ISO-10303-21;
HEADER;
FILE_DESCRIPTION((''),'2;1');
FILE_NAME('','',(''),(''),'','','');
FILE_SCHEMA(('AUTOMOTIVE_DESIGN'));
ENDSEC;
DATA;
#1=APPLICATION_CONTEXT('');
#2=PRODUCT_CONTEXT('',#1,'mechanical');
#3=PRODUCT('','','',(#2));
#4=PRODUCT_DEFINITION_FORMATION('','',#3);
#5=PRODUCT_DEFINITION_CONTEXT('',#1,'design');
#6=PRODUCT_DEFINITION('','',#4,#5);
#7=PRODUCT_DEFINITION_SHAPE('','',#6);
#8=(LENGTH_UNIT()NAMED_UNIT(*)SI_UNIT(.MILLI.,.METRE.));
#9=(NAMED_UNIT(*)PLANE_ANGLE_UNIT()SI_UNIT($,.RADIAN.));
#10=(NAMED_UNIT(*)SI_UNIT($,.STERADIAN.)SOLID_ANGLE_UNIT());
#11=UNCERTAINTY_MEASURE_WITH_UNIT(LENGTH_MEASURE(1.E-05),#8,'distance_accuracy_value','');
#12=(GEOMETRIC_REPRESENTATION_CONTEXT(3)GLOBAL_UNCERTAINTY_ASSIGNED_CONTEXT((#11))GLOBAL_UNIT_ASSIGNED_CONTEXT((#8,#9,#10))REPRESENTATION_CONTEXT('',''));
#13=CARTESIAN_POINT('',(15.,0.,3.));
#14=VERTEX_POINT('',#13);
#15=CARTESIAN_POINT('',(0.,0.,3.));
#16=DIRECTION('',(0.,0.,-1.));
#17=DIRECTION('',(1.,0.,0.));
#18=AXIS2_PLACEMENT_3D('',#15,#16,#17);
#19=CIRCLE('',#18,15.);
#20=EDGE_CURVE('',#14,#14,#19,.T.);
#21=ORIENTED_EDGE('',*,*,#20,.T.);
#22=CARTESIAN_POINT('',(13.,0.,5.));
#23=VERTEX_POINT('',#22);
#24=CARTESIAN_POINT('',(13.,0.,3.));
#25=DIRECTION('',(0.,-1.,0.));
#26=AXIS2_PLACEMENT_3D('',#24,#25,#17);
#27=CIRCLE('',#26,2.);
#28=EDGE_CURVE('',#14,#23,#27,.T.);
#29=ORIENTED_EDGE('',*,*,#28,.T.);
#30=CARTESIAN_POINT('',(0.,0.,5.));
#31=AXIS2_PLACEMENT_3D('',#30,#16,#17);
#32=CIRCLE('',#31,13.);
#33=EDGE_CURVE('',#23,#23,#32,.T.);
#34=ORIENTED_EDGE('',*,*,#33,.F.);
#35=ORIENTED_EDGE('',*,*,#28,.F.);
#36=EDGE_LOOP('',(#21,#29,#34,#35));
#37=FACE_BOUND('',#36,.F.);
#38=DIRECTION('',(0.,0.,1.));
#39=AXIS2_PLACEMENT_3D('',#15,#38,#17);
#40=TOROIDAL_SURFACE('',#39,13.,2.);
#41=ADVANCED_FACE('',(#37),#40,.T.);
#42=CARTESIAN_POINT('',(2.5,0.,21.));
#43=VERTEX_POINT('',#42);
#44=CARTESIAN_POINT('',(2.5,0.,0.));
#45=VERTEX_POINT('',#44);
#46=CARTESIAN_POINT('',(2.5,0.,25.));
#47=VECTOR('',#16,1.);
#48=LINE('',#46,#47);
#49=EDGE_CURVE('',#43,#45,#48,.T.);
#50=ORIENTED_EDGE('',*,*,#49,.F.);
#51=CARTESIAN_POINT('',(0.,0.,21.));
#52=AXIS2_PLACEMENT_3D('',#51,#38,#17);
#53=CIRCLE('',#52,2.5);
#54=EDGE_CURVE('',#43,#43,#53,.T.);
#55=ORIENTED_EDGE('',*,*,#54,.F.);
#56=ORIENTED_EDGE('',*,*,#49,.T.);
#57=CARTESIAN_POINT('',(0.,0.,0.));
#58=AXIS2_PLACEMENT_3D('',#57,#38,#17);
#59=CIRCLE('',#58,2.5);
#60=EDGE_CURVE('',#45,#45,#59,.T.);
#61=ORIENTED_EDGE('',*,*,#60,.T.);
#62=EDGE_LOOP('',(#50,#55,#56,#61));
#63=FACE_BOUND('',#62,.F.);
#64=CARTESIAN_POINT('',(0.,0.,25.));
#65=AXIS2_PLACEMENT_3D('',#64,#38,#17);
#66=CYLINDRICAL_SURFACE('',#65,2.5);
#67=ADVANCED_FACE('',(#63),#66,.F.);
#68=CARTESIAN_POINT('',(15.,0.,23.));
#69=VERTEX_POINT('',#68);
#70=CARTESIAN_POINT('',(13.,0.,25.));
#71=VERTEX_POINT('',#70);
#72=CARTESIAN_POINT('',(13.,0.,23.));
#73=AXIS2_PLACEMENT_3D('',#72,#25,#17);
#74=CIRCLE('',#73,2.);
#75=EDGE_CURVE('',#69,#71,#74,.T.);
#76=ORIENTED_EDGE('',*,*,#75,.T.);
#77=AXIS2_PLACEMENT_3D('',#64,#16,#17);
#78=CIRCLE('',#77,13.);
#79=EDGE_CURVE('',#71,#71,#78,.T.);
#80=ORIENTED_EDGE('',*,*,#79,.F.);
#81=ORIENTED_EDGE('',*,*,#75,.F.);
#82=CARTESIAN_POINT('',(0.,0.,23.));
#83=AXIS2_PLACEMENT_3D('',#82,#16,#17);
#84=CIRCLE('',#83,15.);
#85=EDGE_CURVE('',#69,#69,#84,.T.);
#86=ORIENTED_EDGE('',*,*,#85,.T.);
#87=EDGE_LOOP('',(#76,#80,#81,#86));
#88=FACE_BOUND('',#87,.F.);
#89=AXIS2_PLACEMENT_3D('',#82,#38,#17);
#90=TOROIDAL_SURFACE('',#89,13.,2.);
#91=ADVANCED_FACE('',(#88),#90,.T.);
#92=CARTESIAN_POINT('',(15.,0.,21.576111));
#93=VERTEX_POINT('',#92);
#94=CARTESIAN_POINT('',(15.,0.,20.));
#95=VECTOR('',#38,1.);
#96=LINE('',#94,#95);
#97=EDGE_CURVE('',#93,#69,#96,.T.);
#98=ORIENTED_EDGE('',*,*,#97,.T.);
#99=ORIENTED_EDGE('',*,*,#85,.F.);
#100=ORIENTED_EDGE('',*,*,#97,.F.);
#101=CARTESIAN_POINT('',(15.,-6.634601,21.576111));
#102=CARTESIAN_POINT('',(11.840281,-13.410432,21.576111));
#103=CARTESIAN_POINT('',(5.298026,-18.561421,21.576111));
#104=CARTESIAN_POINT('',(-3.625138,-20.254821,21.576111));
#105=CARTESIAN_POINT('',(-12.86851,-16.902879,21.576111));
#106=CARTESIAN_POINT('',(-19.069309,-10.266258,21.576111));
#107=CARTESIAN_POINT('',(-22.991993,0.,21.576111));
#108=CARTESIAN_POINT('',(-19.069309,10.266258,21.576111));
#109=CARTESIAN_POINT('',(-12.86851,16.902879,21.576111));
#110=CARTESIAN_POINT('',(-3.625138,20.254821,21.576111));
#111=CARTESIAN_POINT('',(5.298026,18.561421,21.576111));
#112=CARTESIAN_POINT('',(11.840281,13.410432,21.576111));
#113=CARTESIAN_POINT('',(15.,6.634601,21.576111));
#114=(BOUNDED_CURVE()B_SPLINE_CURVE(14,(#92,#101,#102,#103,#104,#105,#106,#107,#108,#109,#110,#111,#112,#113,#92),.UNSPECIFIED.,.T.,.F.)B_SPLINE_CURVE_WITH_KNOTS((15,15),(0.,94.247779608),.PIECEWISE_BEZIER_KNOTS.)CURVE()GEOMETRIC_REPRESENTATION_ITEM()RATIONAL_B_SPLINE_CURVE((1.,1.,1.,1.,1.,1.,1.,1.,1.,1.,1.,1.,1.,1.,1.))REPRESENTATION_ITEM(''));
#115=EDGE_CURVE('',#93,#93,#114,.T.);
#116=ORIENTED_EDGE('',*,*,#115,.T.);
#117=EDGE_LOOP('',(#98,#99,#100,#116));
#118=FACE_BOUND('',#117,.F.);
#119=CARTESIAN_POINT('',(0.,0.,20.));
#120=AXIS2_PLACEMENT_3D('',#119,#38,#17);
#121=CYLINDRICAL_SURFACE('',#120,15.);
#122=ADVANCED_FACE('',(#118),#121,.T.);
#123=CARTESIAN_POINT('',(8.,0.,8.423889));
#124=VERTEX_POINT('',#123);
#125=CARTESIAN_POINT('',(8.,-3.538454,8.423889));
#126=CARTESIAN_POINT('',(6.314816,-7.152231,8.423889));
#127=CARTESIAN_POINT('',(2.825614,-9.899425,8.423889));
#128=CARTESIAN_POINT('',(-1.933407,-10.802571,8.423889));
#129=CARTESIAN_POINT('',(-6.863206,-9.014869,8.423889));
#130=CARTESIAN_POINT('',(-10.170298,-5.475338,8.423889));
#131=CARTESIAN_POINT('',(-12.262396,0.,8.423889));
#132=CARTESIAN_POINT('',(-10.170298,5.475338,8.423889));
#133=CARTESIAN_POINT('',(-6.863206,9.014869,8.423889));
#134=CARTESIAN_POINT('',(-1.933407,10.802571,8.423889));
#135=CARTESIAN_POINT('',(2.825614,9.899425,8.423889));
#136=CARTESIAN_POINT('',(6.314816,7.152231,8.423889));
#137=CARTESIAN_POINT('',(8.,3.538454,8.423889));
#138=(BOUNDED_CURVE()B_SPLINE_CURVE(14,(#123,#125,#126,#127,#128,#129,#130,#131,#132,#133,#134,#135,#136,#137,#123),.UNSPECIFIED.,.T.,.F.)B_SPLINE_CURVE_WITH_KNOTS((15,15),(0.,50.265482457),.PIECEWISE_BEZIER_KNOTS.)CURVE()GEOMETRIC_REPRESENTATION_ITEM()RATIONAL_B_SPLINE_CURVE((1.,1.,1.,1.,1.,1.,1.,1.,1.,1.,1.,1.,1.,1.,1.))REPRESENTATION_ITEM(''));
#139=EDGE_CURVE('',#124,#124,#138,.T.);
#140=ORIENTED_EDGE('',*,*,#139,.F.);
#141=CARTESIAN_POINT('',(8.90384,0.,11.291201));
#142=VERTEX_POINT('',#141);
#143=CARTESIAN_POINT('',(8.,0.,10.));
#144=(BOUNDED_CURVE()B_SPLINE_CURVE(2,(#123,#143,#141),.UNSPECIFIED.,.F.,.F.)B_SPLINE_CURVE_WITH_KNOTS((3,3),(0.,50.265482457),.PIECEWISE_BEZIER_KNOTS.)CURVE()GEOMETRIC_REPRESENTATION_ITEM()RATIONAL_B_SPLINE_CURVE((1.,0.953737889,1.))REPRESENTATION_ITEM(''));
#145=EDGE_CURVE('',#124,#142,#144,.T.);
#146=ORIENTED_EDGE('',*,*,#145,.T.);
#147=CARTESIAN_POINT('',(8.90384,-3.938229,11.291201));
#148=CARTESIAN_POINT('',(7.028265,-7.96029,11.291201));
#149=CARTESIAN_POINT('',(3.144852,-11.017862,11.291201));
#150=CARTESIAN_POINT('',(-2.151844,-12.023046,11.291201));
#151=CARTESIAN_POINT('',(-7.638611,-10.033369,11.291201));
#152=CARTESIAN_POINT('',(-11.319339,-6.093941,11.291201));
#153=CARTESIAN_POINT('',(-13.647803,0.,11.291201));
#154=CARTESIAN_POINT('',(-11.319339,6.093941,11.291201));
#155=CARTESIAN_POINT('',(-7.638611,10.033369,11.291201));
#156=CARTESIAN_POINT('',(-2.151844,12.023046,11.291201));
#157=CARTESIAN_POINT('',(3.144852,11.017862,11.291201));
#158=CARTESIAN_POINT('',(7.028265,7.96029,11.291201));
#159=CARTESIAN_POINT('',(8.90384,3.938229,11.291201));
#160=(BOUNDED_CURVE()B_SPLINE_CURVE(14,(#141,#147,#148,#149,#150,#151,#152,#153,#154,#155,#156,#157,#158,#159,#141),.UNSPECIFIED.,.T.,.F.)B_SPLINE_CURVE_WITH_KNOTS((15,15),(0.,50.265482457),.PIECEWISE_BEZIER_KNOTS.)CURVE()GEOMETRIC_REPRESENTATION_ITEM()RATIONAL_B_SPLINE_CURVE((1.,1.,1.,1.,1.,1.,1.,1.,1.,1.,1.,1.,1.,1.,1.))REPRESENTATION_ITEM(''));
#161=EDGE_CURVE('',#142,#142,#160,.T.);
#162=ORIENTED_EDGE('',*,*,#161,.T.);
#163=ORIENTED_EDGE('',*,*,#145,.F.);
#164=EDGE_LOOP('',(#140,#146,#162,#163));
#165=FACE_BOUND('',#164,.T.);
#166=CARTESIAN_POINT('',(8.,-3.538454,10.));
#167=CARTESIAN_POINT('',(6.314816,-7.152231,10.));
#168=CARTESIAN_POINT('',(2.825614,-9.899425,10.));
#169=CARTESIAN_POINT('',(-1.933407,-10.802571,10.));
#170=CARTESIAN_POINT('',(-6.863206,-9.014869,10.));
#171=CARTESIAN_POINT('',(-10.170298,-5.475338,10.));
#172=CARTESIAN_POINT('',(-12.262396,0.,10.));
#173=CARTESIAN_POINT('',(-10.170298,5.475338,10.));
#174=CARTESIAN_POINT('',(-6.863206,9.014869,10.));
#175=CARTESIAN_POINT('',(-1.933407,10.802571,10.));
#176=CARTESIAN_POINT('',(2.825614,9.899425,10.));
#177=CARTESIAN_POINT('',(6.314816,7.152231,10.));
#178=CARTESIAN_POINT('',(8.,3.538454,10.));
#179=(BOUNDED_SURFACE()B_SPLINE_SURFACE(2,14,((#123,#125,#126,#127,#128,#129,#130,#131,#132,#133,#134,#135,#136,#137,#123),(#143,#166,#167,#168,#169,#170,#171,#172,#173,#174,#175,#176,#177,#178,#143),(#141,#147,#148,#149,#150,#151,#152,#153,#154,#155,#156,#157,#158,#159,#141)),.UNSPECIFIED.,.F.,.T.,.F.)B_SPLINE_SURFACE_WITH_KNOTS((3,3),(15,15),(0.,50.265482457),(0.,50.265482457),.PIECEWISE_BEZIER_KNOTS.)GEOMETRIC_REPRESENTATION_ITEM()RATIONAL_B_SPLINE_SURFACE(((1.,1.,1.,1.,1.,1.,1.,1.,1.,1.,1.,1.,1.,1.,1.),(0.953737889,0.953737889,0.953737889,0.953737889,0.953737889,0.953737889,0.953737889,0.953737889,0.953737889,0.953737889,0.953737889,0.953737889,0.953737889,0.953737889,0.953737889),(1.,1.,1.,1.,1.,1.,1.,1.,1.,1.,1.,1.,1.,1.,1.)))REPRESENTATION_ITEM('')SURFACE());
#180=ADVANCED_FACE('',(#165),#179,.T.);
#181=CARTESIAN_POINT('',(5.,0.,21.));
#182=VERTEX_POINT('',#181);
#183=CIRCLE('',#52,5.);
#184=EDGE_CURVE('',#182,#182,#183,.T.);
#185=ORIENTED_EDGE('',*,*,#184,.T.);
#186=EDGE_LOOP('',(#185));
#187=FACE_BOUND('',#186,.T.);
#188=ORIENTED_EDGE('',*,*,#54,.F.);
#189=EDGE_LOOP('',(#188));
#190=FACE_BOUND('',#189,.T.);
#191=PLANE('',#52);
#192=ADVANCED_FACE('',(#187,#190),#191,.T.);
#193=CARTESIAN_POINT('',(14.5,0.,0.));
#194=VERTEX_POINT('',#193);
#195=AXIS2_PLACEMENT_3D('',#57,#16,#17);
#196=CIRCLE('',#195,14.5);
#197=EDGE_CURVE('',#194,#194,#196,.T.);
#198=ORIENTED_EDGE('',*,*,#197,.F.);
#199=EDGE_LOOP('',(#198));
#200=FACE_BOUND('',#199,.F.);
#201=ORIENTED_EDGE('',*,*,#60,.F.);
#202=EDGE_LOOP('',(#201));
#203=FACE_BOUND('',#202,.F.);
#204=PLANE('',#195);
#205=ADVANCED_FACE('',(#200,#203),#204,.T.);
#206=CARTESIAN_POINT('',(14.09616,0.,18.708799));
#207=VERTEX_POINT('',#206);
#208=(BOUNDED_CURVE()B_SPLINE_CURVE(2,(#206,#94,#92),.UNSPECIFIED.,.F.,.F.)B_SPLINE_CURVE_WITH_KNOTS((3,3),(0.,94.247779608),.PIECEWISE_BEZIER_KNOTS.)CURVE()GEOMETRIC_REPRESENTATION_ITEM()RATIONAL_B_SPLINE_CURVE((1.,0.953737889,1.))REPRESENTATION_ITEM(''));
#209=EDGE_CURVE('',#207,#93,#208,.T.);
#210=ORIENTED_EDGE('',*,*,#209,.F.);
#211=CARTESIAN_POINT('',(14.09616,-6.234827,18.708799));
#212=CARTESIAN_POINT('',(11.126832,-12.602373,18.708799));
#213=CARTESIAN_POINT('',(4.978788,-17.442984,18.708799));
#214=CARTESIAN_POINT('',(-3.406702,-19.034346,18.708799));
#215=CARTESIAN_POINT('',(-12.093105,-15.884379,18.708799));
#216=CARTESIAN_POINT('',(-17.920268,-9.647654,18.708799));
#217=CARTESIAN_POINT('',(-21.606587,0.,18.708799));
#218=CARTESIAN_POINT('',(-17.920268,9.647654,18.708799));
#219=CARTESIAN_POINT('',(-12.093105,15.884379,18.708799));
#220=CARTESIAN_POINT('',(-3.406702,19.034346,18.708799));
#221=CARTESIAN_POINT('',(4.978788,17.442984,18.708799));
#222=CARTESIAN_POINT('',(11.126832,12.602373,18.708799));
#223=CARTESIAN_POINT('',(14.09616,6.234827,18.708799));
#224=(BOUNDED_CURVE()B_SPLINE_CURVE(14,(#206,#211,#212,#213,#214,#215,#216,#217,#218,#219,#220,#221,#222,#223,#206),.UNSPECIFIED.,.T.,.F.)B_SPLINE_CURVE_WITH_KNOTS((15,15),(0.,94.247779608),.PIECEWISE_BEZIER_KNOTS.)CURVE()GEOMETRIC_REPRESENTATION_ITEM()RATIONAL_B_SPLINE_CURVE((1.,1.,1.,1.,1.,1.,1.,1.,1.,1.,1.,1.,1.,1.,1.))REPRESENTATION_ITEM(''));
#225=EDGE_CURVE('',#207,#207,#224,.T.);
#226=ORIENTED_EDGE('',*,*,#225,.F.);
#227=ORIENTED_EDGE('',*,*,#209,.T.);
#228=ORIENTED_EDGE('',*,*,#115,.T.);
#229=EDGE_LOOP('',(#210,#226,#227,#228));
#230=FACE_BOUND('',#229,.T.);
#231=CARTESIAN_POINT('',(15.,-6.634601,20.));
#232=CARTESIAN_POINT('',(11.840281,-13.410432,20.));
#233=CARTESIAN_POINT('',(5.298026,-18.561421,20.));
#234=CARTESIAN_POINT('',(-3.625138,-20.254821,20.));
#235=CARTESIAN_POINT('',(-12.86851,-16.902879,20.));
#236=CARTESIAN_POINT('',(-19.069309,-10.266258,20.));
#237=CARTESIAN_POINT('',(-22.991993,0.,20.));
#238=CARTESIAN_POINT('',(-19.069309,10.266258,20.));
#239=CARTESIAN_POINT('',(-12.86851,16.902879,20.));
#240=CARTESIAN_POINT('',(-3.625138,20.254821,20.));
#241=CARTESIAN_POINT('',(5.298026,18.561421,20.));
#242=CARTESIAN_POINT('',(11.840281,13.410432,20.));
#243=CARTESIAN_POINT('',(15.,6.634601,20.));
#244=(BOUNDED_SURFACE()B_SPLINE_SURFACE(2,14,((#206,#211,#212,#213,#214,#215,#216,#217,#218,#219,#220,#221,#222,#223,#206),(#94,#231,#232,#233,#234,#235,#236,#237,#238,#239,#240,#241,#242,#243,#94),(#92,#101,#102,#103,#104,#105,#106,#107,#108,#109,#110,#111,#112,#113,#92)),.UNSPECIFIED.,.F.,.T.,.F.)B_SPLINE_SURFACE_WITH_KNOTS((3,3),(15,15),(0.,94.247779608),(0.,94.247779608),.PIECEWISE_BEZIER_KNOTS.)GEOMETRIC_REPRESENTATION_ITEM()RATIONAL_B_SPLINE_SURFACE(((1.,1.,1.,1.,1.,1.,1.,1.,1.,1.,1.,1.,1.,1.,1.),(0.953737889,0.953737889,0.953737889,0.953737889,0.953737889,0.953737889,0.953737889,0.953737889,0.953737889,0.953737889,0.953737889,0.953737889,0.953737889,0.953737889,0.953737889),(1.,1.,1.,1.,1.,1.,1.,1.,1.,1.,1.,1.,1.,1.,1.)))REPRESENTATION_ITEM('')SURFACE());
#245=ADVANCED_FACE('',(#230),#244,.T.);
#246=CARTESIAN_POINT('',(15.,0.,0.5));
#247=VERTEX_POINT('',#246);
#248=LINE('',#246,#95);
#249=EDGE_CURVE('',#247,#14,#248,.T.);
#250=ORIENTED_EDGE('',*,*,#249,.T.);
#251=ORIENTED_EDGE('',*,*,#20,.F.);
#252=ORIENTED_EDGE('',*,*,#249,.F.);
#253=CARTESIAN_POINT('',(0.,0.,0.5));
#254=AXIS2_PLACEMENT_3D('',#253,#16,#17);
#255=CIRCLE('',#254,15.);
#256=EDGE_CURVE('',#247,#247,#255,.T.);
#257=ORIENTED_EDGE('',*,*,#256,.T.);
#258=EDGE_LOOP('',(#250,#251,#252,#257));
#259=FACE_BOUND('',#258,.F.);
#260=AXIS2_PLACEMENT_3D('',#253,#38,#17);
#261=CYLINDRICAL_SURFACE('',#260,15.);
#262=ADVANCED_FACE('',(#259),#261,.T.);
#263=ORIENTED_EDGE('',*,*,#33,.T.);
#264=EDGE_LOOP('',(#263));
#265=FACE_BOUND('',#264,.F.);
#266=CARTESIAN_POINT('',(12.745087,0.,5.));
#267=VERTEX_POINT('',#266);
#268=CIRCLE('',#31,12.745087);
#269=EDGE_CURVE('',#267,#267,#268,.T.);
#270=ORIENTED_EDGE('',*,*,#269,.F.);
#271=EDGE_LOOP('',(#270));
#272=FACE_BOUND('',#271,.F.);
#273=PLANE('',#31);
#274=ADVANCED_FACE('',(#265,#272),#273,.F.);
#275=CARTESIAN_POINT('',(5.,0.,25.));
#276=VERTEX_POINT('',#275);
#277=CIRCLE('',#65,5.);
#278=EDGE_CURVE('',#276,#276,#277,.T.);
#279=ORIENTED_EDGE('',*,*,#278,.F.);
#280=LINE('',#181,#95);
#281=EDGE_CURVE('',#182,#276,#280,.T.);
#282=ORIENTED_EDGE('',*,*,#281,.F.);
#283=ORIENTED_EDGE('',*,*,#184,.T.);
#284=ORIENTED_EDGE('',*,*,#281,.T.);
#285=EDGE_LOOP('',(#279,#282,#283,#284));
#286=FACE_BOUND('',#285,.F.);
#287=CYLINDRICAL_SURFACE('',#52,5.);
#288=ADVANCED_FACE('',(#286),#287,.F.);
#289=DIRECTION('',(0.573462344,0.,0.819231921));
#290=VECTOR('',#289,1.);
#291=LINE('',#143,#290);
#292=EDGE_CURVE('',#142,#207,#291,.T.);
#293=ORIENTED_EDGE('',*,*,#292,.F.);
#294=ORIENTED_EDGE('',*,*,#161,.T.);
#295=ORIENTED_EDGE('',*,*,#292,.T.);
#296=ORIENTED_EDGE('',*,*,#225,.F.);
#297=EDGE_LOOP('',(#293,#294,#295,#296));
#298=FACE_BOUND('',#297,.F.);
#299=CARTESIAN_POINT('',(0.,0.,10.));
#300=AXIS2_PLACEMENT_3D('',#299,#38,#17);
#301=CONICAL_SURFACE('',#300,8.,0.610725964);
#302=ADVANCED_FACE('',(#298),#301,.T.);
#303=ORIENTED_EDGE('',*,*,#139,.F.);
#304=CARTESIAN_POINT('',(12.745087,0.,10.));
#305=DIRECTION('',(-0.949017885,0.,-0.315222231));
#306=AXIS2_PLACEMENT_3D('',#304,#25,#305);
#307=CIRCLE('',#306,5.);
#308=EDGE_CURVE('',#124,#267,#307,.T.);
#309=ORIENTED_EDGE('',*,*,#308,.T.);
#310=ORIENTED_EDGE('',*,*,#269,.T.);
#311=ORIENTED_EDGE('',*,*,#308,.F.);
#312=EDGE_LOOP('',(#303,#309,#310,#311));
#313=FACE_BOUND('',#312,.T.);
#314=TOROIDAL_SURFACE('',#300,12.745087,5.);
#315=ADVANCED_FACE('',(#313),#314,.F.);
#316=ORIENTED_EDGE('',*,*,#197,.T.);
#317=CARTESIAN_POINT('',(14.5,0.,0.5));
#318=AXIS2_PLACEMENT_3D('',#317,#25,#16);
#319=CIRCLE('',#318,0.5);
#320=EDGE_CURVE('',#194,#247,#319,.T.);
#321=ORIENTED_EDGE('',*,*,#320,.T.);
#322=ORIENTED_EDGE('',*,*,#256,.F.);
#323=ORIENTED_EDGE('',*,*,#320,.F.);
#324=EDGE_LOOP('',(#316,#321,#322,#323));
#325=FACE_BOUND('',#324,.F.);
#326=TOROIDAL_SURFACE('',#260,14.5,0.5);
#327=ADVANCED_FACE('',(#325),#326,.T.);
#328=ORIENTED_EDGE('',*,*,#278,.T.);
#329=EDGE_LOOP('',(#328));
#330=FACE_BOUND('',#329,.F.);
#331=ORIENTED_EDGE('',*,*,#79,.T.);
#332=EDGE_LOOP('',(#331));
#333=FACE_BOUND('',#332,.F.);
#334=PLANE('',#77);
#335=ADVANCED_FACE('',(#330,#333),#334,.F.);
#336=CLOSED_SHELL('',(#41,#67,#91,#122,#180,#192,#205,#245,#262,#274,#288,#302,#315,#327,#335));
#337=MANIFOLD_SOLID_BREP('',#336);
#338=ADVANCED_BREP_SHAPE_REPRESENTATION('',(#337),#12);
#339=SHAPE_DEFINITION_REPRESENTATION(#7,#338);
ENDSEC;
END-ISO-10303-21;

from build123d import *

# Parameters (mm, degrees)
F2_R           = 5
F4_R           = 2.5
F5_DEPTH       = 25.001
F6_D           = 5
F6_CBORE_D     = 10
F6_CBORE_DEPTH = 4


# Not quite as in the source:
# - a fillet or chamfer that OpenCascade refuses, or shapes differently, is made with other operations: its cross-section is extruded or revolved along the edge and cut away or added


with BuildPart() as f1:
    # F0 (on Front) → F1 (revolve)
    with BuildSketch(Plane.XZ):
        with BuildLine():
            Line((0, 25), (0, 0))
            Line((0, 0), (14.5, 0))
            ThreePointArc((14.5, 0), (14.8535533906, 0.1464466094), (15, 0.5))
            Line((15, 0.5), (15, 3))
            ThreePointArc((15, 3), (14.4142135624, 4.4142135624), (13, 5))
            Line((13, 5), (8, 5))
            Line((8, 5), (8, 10))
            Line((8, 10), (15, 20))
            Line((15, 20), (15, 23))
            ThreePointArc((15, 23), (14.4142135624, 24.4142135624), (13, 25))
            Line((13, 25), (0, 25))
        make_face()
    revolve(axis=Axis((0, 0, 12.5), (0, 0, -1)))

    # F2
    f2_edges = [f1.edges().sort_by_distance(p)[0] for p in [
        (-8, 0, 10),
        (-15, 0, 20),
        (11.5, 0, 15),
    ]]
    fillet(f2_edges, radius=F2_R)

    # F3: fillet of radius 5 on 3 edges, made by hand

    # F3_s1 → F3_t2 (revolve)
    with BuildSketch(Plane.XZ):
        with BuildLine():
            ThreePointArc((7.9999979579, 8.4238888459), (9.8193871029, 5.9453387459), (12.7450873806, 5))
            Line((12.7450873806, 5), (8, 5))
            Line((8, 5), (7.9999979579, 8.4238888459))
        make_face()
    revolve(axis=Axis((0, 0, 5), (0, 0, -1)))

    # F4 (on face) → F5 (cut, through all)
    with BuildSketch(Plane.XY.offset(25)):
        Circle(F4_R)
    extrude(amount=-F5_DEPTH, mode=Mode.SUBTRACT)

    # F6 (through all)
    with Locations(Plane.XY.offset(25)):
        with Locations((0, 0)):
            CounterBoreHole(F6_D / 2, F6_CBORE_D / 2, F6_CBORE_DEPTH)


solid = f1.part
